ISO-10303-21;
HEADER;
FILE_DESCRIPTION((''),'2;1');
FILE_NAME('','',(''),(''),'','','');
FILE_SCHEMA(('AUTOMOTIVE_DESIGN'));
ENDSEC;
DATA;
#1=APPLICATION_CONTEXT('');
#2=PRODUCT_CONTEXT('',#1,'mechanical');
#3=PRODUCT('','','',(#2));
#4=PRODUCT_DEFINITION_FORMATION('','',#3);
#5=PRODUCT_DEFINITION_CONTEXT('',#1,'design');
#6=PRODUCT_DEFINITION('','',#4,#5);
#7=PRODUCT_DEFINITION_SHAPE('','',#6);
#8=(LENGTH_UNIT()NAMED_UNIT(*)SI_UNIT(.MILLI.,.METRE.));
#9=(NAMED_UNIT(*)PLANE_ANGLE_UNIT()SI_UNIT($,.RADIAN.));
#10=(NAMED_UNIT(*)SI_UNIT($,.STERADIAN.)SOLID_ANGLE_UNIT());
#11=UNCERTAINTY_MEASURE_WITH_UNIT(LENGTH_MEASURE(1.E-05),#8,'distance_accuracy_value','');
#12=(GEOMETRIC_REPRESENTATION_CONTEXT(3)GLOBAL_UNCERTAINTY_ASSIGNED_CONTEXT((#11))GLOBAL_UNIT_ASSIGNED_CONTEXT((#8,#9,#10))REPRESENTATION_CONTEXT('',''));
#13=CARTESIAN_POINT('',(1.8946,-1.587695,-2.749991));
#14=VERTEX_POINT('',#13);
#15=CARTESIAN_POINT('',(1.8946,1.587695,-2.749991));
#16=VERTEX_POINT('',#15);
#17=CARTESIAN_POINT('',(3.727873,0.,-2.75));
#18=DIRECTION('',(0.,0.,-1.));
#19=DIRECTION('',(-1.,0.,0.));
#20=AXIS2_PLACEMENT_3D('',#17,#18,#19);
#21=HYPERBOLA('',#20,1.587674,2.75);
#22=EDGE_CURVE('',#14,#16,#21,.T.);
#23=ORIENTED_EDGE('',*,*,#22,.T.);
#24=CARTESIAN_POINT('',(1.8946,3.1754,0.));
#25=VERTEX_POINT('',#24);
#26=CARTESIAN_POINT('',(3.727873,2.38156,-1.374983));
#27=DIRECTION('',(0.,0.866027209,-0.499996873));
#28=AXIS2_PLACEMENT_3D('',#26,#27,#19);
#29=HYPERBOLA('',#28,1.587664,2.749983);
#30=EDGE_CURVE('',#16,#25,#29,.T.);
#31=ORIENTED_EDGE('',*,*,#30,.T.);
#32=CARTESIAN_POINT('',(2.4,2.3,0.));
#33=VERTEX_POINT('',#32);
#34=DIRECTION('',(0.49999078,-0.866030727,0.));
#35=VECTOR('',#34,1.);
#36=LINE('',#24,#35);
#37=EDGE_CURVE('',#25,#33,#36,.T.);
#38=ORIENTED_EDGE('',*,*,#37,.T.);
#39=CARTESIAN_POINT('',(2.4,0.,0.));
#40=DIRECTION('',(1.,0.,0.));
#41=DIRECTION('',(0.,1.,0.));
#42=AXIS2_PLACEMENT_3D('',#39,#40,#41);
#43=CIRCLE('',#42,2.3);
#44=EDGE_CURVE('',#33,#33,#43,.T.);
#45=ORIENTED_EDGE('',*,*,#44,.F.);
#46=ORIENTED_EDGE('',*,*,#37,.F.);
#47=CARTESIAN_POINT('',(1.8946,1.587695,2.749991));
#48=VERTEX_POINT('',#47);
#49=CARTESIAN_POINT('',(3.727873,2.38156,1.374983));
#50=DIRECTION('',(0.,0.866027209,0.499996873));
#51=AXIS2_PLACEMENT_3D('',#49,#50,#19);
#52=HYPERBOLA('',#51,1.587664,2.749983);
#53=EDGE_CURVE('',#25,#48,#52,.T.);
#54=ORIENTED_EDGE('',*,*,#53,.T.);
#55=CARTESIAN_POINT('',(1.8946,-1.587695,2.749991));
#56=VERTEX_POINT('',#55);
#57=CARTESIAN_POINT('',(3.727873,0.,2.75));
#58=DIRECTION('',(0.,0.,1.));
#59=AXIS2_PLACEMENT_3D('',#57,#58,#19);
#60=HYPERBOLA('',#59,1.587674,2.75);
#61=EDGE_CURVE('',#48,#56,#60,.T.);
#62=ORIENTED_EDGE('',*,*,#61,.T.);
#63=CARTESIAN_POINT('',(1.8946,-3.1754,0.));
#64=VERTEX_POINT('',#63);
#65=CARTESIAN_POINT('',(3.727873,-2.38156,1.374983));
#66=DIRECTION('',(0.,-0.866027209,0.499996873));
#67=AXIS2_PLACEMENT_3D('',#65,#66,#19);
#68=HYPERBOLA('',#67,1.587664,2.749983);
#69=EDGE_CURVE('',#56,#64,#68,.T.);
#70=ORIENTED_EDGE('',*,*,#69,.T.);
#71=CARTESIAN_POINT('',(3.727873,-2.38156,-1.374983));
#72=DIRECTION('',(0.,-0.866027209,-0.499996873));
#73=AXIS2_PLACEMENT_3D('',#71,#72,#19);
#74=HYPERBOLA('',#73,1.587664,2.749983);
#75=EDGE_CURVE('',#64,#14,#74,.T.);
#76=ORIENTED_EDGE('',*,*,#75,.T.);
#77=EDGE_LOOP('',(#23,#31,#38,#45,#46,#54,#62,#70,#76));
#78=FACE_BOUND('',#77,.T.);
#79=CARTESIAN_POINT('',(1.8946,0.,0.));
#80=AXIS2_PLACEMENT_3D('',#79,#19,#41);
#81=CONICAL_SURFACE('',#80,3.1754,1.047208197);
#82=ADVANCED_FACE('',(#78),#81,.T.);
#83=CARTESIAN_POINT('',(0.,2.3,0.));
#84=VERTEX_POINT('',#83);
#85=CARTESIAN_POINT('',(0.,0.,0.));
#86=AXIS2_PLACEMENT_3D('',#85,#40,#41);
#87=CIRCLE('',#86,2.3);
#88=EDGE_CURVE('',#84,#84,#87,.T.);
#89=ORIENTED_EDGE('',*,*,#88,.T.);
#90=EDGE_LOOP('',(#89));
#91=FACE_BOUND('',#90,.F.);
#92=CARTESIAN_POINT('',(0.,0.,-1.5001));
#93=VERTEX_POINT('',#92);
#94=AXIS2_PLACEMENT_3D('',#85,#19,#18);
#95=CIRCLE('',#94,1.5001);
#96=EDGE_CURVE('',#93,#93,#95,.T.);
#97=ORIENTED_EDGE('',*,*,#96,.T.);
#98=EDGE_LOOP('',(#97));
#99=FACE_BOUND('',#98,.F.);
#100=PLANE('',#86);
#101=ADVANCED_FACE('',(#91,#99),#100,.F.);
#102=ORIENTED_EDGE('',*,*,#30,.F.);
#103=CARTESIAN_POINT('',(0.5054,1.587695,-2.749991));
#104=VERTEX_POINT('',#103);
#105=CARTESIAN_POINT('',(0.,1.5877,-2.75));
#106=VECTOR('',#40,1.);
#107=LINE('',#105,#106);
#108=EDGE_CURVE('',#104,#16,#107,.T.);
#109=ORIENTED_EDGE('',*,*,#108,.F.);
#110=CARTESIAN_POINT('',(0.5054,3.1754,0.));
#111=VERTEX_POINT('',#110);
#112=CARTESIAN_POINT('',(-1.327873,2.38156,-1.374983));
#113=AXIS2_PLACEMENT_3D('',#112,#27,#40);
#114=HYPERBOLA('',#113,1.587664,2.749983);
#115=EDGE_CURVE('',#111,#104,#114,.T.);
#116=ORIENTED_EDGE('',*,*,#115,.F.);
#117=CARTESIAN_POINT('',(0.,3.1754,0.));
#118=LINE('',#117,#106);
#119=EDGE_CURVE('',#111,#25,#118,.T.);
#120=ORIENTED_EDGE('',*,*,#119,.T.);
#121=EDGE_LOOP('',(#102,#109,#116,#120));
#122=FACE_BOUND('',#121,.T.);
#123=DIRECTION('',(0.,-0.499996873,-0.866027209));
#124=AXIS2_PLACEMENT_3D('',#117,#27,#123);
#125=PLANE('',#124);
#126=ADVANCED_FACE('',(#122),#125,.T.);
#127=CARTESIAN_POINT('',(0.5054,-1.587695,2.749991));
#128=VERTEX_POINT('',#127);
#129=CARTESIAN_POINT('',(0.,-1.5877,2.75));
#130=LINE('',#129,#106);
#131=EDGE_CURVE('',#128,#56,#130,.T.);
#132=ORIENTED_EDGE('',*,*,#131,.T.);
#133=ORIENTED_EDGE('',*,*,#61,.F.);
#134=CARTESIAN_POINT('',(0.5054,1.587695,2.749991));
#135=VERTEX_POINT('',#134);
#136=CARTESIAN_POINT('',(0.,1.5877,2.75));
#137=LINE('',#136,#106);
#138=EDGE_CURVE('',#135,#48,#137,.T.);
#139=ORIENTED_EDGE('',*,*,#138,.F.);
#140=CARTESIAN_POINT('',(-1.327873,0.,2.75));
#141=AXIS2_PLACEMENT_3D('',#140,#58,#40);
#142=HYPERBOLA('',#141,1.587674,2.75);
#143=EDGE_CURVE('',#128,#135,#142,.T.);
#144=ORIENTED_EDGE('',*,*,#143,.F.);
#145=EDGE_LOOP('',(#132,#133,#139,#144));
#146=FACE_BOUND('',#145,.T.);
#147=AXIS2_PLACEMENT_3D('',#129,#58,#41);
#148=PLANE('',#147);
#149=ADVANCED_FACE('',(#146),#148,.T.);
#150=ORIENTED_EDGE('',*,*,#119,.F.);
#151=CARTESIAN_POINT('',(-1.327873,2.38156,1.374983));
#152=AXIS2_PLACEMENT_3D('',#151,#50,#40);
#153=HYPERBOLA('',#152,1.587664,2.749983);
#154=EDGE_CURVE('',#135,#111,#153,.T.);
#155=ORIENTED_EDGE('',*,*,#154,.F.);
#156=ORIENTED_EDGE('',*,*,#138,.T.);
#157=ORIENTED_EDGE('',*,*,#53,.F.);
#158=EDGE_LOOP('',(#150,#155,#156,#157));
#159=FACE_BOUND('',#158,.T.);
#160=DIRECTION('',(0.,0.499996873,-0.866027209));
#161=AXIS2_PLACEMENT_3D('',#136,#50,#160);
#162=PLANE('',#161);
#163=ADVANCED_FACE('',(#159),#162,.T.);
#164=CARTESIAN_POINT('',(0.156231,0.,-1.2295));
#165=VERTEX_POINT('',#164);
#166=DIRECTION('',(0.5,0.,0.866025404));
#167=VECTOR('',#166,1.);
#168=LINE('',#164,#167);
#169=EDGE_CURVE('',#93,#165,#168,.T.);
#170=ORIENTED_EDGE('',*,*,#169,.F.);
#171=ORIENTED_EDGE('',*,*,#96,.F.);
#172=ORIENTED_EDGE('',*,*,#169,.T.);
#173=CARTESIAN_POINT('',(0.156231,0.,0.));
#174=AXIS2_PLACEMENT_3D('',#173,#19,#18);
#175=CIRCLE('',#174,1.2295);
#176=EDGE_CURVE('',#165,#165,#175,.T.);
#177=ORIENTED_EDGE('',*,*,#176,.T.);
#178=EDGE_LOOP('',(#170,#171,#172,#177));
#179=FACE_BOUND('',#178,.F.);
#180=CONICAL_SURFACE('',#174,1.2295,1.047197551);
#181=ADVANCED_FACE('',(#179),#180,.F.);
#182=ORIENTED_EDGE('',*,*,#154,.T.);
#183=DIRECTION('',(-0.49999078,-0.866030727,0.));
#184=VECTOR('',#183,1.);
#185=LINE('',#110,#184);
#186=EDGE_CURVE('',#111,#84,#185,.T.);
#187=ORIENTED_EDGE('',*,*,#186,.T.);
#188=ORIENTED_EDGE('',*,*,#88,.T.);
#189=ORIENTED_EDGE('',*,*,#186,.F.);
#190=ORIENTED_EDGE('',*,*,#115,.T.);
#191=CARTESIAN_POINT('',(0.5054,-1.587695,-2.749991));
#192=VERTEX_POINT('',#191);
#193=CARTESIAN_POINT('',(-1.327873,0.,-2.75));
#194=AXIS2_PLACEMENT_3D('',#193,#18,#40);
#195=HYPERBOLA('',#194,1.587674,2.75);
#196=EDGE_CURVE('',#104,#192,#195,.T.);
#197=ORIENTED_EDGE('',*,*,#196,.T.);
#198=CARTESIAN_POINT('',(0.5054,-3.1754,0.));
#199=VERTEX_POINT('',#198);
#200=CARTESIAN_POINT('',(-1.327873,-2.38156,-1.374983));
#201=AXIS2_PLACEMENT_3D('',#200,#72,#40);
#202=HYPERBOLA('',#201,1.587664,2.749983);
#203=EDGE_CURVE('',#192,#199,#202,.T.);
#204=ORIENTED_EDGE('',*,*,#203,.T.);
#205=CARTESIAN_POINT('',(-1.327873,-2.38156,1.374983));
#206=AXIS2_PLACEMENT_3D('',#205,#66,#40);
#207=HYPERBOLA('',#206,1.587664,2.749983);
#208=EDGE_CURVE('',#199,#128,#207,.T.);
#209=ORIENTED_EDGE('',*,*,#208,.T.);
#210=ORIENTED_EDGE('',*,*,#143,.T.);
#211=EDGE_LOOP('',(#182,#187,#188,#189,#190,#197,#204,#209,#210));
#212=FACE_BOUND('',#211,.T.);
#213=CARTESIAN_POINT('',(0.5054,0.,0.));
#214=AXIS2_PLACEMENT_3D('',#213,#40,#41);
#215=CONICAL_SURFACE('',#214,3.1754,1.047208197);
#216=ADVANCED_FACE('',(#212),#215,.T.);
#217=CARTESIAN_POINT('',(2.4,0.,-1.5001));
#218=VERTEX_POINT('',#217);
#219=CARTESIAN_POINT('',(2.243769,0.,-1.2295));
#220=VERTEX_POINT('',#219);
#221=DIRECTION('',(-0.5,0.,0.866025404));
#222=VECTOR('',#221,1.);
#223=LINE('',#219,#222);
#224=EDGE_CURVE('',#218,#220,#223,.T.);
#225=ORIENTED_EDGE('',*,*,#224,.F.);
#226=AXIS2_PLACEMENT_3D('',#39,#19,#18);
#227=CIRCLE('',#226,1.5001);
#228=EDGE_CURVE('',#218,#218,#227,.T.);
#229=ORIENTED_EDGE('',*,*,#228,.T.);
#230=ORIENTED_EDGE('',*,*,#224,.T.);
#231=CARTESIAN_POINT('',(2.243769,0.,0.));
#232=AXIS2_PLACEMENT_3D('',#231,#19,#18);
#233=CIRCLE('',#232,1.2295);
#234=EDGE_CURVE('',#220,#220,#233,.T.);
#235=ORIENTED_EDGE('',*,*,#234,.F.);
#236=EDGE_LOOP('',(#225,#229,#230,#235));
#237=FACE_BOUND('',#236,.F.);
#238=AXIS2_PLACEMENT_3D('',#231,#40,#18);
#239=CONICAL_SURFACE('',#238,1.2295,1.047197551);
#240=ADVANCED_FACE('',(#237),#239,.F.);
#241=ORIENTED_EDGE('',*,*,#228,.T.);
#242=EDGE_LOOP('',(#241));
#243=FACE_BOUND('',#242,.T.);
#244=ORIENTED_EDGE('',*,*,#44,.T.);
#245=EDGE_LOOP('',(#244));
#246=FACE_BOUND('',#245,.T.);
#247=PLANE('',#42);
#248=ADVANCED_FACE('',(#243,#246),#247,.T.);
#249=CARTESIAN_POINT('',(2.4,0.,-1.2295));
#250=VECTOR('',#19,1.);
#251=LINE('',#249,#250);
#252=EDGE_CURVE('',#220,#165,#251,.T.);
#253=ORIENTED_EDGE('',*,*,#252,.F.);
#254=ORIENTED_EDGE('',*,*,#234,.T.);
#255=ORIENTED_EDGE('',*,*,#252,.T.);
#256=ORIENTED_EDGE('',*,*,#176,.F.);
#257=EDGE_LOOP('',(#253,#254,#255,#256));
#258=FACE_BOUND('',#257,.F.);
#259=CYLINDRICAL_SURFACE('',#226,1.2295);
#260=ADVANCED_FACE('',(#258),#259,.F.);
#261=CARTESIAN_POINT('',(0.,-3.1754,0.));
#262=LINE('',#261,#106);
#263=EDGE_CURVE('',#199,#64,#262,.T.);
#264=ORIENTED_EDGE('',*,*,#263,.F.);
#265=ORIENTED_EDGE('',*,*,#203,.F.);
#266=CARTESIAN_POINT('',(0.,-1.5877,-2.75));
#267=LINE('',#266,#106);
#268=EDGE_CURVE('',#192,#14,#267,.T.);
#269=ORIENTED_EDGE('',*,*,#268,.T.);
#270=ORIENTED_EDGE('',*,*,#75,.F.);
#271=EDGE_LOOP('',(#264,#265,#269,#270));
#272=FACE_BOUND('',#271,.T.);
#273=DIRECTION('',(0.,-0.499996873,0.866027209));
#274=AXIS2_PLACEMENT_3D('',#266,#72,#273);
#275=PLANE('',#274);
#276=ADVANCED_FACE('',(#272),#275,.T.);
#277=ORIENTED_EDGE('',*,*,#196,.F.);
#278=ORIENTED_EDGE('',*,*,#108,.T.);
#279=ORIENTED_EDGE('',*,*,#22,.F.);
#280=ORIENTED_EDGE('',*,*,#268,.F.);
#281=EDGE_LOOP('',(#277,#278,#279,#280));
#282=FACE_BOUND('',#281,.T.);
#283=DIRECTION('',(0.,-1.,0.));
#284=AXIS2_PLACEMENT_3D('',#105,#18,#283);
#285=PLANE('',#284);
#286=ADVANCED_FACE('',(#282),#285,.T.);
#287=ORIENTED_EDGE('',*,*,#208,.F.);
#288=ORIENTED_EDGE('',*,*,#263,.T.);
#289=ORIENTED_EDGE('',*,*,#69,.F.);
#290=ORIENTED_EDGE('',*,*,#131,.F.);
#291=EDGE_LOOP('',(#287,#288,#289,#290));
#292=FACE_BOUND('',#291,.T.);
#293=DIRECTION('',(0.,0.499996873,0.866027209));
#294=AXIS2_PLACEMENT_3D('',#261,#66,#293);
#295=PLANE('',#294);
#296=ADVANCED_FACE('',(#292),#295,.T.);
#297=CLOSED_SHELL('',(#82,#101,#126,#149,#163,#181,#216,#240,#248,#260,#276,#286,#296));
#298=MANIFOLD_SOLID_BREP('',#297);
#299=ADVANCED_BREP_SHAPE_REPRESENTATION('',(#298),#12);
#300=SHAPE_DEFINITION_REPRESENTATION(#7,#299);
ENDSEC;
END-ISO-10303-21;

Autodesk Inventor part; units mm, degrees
ref_plane "YZ Plane" through (0, 0, 0) normal (1, 0, 0) x (0, 1, 0)
ref_plane "XZ Plane" through (0, 0, 0) normal (0, 1, 0) x (-1, 0, 0)
sketch "Skizze1" plane through (0, 0, 0) normal (1, 0, 0) x (0, 1, 0)
  line L0 (-3.1754, 0) -> (-1.5877, 2.75)
  line L1 (-1.5877, 2.75) -> (1.5877, 2.75)
  line L2 (1.5877, 2.75) -> (3.1754, 0)
  line L3 (3.1754, 0) -> (1.5877, -2.75)
  line L4 (1.5877, -2.75) -> (-1.5877, -2.75)
  line L5 (-1.5877, -2.75) -> (-3.1754, 0)
  point P0 (0, 0)
  point P1 (0, 0)
  dimension "d0" = 6.3509
extrude "Körper" add sketch "Skizze1" along normal blind 2.4
sketch "Skizze2" plane through (0, 0, 0) normal (0, 0, 1) x (1, 0, 0)
  line L0 (0, 1.5877) -> (0, 3.1754) projected
  line L1 (0, 3.1754) -> (2.4, 3.1754) projected
  line L2 (2.4, 1.5877) -> (2.4, 3.1754) projected
  line L3 (-0.48, 0) -> (2.88, 0) projected
  line L4 (0.5054, 3.1754) -> (0, 2.3)
  line L5 (1.8946, 3.1754) -> (2.4, 2.3)
  dimension "d3" = 30
  dimension "d4" = 30
  dimension "d5" = 4.6
  dimension "d6" = 4.6
revolve "Fase1" cut sketch "Skizze2" angle 360 about axis through (-10, 0, 0) along (1, 0, 0)
sketch "Skizze3" plane through (2.4, 0, 0) normal (1, 0, 0) x (0, 0, -1)
  arc A0 (-0.625, -1.0825) -> (0.625, -1.0825) centre (0, 0) ccw projected
hole "Gewinde" at (2.4, 0, 0) direction (-1, 0, 0) diameter 2.459 end through all thread size "M3x0.5" class "6H" standard "ISO Metric profile"
chamfer "Fase2" distance 0.2706 angle 30 1 edges at (2.4, 0, 1.2295) measured on face at (2.4, 1.9179, -0.2329)
chamfer "Fase3" distance 0.2706 angle 30 1 edges at (0, 0, 1.2295) measured on face at (0, 1.9179, -0.2329)
ref_plane "Work Plane1" through (-6.3375, 0, 0) normal (0, -0.8660254, -0.5) x (1, 0, 0)
equation "\"d0\" = 1.1547 * SW"
equation "\"d1\" = KOH"
equation "\"d3\" = ANG1"
equation "\"d4\" = ANG2"
equation "\"d5\" = SW0"
equation "\"d6\" = SW01"
equation "\"d8\" = -0.5 * GD1 + 0.5 * NND"
equation "\"d40\" = -0.5 * GD1 + 0.5 * NND"
equation "\"d10\" = -0.5 * GD1 + 0.5 * NND"
equation "\"d41\" = -0.5 * GD1 + 0.5 * NND"
equation "\"ANG1\" = 30deg"
equation "\"ANG2\" = 30deg"
equation "\"NND\" = 3"
equation "\"KOH\" = 2.4"
equation "\"SW\" = 5.5"
equation "\"SW0\" = 4.6"
equation "\"SW01\" = 4.6"
equation "\"GUL\" = 0.541266 * PTC"
equation "\"THREADDIA\" = 3"
equation "\"TOA\" = 30deg"
equation "\"PTC\" = 0.5"
equation "\"E0\" = 1.155 * SW"
equation "\"GAL\" = 0.541266 * PTC"
equation "\"GD1\" = 2.458734"
properties part number "ISO 4032 - M3(1)" material "Edelstahl, 440C"
